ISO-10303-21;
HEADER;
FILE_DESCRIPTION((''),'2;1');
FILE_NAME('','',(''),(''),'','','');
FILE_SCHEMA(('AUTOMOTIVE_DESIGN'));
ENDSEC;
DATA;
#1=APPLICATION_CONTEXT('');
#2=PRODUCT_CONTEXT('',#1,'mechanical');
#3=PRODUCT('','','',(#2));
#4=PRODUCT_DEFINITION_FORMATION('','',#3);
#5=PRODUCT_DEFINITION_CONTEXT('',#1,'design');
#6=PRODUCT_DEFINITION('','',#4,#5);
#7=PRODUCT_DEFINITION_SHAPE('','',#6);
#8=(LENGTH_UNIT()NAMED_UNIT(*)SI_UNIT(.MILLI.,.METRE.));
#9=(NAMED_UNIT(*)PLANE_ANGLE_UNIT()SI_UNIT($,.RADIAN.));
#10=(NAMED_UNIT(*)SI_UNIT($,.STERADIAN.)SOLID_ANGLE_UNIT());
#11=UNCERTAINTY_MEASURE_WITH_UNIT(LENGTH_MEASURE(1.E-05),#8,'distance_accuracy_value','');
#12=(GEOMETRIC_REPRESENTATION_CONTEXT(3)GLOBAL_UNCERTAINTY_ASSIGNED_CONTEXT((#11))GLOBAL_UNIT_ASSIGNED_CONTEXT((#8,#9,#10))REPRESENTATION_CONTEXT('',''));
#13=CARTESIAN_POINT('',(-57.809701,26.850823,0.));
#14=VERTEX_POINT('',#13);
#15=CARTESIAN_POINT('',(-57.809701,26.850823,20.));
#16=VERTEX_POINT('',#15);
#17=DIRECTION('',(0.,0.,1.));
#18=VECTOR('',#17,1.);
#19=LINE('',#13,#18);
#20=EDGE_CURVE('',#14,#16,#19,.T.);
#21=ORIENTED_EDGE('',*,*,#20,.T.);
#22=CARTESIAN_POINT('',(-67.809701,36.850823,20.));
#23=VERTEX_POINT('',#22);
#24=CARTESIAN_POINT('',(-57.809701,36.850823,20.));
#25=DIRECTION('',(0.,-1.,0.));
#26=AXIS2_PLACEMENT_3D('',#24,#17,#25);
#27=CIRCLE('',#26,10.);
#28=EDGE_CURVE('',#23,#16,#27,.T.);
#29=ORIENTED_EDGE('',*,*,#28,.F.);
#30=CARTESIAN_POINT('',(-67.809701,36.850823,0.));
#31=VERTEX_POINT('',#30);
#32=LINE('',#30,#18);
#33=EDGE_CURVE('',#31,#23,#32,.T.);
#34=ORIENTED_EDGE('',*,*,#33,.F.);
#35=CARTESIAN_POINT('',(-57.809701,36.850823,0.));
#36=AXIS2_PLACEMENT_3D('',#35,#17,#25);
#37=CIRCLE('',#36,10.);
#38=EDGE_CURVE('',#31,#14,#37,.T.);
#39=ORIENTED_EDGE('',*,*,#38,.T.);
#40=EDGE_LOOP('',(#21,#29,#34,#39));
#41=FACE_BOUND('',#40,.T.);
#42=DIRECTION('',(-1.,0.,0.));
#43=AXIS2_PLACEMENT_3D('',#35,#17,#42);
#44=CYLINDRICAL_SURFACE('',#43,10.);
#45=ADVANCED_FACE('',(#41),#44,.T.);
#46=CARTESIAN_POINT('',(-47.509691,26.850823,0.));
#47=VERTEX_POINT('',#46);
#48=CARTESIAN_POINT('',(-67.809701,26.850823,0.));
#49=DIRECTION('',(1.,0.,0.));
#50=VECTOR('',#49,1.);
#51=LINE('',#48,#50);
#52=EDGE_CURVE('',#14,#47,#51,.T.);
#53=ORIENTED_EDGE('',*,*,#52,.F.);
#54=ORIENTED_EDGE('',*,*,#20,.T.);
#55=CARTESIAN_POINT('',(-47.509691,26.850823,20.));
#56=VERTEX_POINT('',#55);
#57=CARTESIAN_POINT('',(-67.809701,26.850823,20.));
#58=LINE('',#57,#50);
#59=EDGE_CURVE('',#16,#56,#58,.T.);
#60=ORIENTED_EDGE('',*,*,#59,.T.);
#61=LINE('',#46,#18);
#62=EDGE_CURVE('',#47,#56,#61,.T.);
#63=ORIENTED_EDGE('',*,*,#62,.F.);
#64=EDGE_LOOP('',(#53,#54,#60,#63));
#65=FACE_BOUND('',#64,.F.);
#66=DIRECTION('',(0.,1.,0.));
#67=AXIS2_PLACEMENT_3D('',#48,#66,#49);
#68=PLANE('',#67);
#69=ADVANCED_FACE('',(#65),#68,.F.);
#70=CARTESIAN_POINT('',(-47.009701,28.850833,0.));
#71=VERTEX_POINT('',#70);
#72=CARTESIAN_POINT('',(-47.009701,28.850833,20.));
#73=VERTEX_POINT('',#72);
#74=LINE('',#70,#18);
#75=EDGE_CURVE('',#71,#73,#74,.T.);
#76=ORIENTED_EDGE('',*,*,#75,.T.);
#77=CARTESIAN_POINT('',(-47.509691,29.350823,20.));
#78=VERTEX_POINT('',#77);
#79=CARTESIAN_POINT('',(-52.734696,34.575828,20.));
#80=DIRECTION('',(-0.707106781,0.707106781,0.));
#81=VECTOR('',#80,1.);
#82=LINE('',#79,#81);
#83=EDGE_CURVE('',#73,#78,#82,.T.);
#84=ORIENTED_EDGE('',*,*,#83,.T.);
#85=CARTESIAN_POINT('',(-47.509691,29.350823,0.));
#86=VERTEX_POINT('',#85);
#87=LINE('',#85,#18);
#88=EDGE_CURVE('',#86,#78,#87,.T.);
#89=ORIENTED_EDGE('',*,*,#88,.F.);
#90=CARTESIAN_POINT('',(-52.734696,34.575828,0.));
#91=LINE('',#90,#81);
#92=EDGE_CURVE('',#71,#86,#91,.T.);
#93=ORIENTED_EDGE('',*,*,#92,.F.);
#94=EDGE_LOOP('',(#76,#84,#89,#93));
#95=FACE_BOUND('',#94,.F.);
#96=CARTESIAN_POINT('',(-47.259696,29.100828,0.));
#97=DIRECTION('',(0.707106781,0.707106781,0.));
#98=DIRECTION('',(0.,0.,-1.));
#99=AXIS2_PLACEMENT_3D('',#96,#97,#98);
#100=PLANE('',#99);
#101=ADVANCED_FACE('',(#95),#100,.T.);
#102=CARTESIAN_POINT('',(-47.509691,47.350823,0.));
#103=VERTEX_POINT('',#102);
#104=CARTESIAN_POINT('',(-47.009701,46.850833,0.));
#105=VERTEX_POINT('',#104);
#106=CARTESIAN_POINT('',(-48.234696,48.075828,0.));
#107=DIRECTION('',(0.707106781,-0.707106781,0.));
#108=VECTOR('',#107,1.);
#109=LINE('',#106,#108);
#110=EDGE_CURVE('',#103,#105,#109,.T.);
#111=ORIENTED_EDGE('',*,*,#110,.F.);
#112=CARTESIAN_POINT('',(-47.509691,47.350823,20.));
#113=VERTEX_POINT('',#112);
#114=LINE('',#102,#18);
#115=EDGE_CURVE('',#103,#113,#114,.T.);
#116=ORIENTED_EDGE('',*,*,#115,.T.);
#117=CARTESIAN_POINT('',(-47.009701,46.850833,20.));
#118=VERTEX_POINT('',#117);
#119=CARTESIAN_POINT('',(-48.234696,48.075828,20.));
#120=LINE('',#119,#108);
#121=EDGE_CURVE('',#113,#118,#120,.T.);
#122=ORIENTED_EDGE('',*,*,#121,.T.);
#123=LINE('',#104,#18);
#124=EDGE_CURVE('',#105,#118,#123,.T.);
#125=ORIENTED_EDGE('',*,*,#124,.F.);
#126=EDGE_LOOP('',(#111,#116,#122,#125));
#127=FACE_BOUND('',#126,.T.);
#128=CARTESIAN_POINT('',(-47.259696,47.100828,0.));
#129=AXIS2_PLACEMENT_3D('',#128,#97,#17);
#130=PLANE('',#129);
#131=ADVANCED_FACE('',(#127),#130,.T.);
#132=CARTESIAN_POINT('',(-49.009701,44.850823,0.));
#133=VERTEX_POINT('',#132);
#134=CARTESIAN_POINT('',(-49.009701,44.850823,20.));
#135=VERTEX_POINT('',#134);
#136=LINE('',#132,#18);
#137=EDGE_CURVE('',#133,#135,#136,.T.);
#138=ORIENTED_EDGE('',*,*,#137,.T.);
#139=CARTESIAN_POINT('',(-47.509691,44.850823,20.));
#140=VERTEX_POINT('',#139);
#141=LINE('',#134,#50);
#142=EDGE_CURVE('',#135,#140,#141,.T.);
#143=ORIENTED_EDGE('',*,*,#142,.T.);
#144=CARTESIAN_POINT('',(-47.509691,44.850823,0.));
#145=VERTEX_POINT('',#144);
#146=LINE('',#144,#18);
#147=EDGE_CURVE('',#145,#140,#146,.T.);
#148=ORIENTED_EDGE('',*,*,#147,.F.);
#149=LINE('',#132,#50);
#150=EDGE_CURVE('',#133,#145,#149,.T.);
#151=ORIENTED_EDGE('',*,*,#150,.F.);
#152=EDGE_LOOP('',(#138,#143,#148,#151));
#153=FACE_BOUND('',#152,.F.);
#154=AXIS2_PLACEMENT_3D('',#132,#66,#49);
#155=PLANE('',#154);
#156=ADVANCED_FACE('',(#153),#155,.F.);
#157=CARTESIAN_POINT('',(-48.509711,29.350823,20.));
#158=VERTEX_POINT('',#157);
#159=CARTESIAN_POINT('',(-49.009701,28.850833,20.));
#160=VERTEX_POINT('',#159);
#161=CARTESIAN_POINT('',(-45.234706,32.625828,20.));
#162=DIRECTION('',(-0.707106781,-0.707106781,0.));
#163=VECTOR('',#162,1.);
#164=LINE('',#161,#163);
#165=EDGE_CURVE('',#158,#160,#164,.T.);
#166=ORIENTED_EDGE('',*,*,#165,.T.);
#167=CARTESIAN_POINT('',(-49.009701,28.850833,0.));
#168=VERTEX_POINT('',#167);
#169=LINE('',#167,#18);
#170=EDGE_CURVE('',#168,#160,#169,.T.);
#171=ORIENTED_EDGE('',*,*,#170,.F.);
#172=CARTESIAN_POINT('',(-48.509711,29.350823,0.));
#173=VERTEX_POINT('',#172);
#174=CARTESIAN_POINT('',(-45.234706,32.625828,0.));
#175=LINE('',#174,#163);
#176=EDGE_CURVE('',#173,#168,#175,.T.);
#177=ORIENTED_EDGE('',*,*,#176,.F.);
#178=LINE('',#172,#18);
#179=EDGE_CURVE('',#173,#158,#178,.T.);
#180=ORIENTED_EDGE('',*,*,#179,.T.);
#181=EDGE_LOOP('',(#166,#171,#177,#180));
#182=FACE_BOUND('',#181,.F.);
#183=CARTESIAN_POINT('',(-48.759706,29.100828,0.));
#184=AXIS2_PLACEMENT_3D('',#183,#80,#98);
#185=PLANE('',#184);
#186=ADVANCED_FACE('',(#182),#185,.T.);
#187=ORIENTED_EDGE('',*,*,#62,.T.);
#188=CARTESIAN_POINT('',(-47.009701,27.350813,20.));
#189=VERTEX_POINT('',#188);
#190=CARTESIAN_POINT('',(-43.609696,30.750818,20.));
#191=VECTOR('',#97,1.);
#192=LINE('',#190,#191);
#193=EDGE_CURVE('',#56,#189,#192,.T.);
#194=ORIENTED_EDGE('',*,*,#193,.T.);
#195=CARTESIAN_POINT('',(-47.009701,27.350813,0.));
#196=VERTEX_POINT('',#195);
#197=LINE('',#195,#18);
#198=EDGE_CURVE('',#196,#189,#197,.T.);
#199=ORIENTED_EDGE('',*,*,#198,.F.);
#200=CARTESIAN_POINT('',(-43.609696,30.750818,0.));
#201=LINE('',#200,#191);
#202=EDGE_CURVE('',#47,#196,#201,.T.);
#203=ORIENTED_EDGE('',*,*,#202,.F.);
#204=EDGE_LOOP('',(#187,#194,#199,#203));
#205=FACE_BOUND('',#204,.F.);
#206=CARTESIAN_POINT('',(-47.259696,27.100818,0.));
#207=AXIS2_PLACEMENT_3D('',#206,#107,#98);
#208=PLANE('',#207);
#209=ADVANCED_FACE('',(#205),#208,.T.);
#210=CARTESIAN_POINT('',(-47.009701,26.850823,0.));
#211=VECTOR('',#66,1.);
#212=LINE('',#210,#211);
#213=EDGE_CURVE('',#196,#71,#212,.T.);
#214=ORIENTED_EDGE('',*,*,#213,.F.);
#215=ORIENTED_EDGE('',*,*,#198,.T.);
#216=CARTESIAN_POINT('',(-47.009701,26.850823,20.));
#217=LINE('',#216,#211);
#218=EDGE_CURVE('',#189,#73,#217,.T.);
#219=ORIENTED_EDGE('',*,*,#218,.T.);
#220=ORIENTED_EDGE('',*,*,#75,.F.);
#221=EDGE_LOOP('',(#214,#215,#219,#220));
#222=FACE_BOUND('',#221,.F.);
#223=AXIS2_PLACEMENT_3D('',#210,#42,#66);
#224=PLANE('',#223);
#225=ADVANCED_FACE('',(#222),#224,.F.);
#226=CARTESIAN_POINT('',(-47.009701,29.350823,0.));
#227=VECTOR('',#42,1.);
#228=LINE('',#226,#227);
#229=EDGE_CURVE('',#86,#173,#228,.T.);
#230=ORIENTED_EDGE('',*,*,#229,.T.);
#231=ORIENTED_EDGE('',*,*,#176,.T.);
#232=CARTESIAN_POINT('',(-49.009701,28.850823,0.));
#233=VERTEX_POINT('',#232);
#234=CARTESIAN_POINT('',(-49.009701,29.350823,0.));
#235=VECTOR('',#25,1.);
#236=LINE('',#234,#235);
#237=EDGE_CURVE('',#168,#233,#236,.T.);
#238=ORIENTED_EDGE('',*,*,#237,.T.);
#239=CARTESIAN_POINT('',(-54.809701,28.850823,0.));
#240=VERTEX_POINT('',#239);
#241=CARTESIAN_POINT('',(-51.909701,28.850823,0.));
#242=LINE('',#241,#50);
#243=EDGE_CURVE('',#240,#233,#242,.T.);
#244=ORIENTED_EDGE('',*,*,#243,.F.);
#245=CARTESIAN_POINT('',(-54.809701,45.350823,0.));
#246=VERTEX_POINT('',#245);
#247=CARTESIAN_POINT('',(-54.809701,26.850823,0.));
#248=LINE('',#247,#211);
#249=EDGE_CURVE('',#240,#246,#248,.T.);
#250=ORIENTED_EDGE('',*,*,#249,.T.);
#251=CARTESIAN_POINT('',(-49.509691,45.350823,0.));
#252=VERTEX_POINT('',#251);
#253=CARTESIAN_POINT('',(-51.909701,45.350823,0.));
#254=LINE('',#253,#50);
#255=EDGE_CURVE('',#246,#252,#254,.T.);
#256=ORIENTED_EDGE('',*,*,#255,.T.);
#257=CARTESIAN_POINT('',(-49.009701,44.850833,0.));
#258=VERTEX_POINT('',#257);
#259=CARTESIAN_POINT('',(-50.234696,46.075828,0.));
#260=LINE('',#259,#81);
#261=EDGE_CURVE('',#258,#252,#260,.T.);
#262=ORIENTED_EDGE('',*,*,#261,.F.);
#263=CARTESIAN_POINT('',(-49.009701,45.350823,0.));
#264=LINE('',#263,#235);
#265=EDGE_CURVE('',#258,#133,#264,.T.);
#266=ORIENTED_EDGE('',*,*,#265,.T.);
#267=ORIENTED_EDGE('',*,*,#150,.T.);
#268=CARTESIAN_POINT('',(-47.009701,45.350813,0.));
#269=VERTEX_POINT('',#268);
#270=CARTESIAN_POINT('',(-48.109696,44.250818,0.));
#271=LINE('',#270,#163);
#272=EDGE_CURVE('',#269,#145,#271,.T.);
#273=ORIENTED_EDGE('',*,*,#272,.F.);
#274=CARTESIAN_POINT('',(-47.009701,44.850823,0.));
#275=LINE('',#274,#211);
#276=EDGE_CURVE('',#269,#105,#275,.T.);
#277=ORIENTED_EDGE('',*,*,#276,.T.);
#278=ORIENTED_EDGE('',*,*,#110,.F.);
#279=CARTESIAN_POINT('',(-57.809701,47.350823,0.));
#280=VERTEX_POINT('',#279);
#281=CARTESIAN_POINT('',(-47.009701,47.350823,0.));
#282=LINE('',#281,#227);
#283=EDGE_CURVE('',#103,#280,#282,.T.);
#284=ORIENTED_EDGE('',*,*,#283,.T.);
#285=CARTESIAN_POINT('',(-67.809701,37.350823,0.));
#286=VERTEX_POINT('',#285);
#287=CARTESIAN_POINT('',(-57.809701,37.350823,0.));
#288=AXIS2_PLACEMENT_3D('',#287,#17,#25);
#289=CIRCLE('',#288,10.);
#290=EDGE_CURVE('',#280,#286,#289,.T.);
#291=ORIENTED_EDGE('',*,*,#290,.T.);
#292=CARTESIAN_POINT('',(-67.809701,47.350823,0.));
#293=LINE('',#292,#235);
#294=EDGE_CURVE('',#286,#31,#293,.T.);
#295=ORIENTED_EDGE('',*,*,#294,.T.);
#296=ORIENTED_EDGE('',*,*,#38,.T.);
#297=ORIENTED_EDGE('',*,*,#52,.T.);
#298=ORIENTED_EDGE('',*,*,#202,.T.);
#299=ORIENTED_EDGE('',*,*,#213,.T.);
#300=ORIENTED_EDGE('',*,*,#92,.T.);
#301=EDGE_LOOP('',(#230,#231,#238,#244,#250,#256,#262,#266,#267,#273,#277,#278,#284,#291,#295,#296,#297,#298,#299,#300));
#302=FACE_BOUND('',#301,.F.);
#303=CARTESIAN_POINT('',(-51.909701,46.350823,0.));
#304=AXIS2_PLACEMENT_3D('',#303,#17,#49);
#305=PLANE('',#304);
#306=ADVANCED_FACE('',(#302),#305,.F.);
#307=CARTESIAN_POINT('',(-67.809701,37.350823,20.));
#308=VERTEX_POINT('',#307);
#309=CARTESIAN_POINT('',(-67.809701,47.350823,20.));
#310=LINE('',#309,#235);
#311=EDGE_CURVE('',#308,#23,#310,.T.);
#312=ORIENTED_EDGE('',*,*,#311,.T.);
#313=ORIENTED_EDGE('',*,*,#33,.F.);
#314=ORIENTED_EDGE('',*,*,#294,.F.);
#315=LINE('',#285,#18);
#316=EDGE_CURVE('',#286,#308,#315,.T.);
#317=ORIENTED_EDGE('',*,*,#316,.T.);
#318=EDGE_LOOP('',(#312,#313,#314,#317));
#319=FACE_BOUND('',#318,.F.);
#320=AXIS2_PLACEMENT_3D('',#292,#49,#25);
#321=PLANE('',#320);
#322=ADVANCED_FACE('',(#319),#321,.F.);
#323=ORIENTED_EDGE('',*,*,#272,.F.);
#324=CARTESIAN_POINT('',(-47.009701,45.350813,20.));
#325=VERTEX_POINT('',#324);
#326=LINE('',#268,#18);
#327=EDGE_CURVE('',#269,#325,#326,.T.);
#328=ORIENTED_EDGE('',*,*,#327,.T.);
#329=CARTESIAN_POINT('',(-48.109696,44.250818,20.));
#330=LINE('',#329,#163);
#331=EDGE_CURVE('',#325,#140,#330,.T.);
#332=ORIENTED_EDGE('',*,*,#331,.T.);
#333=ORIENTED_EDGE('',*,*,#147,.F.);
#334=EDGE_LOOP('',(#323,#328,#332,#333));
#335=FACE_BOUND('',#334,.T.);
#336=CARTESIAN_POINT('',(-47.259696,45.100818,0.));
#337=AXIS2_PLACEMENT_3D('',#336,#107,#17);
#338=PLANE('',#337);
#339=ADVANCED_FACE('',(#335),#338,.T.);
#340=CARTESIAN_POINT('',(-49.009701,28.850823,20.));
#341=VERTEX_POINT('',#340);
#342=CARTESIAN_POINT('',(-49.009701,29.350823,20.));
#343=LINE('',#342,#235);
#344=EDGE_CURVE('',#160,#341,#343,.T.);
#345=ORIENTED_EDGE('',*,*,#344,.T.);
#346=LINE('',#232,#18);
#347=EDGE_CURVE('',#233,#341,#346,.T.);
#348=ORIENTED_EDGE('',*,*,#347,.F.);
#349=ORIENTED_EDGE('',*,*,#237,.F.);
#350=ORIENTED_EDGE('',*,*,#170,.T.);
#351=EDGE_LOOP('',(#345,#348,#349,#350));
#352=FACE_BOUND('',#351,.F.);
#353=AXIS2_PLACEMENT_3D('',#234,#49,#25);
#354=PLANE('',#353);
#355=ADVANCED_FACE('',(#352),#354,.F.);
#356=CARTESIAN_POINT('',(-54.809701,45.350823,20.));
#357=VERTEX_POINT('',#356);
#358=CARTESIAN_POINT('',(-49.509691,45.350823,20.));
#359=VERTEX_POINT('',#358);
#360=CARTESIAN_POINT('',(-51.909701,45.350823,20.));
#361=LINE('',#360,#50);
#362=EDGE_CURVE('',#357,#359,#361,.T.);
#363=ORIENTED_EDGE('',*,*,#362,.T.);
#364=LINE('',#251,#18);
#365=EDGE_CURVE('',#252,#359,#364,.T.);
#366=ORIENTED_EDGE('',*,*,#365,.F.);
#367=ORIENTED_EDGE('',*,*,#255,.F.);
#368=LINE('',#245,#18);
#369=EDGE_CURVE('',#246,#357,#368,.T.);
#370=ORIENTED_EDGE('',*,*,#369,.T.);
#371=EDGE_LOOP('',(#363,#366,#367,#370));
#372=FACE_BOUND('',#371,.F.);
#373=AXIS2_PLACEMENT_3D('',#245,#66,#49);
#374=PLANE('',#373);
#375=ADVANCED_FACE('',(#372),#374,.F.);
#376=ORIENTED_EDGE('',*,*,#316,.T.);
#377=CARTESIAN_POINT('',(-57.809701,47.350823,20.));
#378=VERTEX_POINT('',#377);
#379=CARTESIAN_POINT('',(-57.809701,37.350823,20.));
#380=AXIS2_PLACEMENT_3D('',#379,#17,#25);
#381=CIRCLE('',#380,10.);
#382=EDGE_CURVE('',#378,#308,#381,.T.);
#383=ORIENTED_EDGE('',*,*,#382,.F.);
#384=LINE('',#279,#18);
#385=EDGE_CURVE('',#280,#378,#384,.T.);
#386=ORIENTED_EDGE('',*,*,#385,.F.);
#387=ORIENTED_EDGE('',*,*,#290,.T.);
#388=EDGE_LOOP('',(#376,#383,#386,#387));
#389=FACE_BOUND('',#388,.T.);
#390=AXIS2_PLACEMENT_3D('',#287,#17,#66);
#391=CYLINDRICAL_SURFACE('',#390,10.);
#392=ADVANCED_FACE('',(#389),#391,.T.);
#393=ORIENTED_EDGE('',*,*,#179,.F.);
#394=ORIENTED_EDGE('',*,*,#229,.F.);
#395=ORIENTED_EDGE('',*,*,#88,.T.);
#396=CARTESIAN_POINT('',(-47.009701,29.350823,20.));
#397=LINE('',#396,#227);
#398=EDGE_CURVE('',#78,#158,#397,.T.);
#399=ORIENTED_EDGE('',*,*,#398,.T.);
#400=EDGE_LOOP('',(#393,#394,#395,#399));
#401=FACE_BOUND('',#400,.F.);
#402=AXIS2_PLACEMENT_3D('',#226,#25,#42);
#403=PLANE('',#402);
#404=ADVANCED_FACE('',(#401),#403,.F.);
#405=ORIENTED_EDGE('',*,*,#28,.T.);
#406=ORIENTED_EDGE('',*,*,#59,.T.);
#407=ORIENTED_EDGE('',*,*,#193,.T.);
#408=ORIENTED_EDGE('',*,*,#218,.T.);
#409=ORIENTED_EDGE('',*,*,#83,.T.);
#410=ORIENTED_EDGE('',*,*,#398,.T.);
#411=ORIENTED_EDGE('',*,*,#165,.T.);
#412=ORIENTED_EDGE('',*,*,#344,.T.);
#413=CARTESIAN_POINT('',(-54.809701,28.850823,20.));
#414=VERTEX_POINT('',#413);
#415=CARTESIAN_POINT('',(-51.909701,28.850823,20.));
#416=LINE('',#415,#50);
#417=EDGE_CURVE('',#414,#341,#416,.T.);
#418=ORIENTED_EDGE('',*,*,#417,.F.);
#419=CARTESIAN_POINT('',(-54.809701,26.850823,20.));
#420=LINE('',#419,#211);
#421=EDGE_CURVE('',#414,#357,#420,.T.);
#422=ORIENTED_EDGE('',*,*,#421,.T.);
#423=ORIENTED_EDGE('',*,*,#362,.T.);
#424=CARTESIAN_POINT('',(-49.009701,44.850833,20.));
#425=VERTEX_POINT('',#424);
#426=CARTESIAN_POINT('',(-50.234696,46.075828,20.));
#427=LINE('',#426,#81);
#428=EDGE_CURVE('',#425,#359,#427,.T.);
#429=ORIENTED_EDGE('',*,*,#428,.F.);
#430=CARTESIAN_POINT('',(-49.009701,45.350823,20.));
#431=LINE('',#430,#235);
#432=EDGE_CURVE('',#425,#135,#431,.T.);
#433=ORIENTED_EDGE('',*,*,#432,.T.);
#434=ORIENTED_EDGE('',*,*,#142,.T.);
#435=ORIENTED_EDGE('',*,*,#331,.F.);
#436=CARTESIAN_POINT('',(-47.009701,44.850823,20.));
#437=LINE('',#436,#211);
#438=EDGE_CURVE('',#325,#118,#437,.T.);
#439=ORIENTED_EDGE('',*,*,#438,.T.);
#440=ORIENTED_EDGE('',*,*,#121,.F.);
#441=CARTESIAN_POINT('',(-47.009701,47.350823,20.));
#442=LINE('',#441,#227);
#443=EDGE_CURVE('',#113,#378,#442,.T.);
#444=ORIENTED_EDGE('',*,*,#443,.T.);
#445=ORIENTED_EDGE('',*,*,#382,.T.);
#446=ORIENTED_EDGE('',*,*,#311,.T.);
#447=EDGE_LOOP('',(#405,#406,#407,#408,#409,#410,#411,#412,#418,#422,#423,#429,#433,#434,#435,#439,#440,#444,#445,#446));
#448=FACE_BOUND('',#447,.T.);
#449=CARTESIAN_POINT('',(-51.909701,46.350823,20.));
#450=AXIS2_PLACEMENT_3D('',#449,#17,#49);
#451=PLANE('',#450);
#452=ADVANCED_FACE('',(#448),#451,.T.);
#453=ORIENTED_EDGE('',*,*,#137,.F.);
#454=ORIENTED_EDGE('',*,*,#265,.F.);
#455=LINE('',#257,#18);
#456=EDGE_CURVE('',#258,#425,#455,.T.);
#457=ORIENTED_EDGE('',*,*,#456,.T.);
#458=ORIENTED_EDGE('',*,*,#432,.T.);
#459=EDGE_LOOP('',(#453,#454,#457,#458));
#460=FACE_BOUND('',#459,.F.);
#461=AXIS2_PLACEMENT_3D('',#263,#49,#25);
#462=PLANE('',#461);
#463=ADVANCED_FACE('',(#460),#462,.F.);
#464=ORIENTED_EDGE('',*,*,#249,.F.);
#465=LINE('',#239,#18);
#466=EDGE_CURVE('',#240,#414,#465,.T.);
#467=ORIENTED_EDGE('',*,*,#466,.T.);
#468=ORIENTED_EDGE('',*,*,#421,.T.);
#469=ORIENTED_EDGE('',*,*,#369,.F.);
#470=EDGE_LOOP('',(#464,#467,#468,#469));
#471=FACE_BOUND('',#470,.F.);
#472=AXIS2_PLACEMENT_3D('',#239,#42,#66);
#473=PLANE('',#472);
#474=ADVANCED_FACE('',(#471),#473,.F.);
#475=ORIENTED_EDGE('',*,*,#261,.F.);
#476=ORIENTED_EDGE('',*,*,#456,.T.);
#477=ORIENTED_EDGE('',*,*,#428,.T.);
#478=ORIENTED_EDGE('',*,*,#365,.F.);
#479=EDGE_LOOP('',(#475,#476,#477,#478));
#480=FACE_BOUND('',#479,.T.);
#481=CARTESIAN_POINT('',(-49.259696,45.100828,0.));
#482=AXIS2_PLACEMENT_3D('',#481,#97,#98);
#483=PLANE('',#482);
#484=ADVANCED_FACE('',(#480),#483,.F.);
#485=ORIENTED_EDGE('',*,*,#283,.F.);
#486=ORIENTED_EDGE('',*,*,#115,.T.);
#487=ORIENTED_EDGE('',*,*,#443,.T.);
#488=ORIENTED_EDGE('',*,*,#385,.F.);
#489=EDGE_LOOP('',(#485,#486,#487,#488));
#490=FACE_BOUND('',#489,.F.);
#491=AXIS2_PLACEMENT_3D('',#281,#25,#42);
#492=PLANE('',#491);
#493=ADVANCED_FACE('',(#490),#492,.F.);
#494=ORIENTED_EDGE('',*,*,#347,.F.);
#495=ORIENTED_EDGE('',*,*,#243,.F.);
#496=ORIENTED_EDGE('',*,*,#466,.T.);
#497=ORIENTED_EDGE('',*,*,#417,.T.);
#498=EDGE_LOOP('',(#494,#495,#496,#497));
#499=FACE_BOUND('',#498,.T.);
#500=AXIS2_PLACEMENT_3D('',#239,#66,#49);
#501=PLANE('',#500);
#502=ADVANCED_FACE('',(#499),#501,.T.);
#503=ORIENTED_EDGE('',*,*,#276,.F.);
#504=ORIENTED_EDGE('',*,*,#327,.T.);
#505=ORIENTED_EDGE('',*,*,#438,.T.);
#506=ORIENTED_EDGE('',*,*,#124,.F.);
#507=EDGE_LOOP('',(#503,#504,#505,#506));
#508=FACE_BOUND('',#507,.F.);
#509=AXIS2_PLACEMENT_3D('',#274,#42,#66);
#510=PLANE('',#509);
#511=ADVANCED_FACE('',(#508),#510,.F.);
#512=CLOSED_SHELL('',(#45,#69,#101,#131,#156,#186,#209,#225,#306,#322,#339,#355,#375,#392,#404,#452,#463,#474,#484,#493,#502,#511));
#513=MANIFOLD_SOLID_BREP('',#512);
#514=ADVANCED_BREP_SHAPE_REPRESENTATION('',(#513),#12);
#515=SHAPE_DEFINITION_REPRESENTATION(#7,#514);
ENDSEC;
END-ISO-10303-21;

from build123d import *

# Parameters (mm, degrees)
F0_W     = 5.8
F0_H     = 2
F1_DEPTH = 20
F2_R     = 10
F3_SIZE  = 0.49999


# Not quite as in the source:
# - a fillet or chamfer is up to 0.001 mm smaller than in the source, because OpenCascade refuses the exact size


with BuildPart() as f1:
    # F0 (on Top) → F1 (new body)
    with BuildSketch(Plane.XY):
        with Locations((-51.9097009659, 46.350823313)):
            Rectangle(F0_W, F0_H)
        Polygon((-54.8097009659, 45.350823313), (-54.8097009659, 47.350823313), (-67.8097009659, 47.350823313), (-67.8097009659, 26.850823313), (-54.8097009659, 26.850823313), (-54.8097009659, 28.850823313), align=None)
        Polygon((-47.0097009659, 47.350823313), (-49.0097009659, 47.350823313), (-49.0097009659, 45.350823313), (-49.0097009659, 44.850823313), (-47.0097009659, 44.850823313), align=None)
        with Locations((-51.9097009659, 27.850823313)):
            Rectangle(F0_W, F0_H)
        Polygon((-49.0097009659, 29.350823313), (-49.0097009659, 28.850823313), (-49.0097009659, 26.850823313), (-47.0097009659, 26.850823313), (-47.0097009659, 29.350823313), align=None)
    extrude(amount=F1_DEPTH)

    # F2
    f2_edges = [f1.edges().sort_by_distance(p)[0] for p in [
        (-67.809701, 47.350823, 10),
        (-67.809701, 26.850823, 10),
    ]]
    fillet(f2_edges, radius=F2_R)

    # F3 (size 0.5 in the source; OpenCascade refuses exactly that, so slightly less here)
    f3_edges = [f1.edges().sort_by_distance(p)[0] for p in [
        (-47.009701, 47.350823, 10),
        (-47.009701, 44.850823, 10),
        (-47.009701, 29.350823, 10),
        (-47.009701, 26.850823, 10),
        (-49.009701, 29.350823, 10),
        (-49.009701, 45.350823, 10),
    ]]
    chamfer(f3_edges, length=F3_SIZE)


solid = f1.part
